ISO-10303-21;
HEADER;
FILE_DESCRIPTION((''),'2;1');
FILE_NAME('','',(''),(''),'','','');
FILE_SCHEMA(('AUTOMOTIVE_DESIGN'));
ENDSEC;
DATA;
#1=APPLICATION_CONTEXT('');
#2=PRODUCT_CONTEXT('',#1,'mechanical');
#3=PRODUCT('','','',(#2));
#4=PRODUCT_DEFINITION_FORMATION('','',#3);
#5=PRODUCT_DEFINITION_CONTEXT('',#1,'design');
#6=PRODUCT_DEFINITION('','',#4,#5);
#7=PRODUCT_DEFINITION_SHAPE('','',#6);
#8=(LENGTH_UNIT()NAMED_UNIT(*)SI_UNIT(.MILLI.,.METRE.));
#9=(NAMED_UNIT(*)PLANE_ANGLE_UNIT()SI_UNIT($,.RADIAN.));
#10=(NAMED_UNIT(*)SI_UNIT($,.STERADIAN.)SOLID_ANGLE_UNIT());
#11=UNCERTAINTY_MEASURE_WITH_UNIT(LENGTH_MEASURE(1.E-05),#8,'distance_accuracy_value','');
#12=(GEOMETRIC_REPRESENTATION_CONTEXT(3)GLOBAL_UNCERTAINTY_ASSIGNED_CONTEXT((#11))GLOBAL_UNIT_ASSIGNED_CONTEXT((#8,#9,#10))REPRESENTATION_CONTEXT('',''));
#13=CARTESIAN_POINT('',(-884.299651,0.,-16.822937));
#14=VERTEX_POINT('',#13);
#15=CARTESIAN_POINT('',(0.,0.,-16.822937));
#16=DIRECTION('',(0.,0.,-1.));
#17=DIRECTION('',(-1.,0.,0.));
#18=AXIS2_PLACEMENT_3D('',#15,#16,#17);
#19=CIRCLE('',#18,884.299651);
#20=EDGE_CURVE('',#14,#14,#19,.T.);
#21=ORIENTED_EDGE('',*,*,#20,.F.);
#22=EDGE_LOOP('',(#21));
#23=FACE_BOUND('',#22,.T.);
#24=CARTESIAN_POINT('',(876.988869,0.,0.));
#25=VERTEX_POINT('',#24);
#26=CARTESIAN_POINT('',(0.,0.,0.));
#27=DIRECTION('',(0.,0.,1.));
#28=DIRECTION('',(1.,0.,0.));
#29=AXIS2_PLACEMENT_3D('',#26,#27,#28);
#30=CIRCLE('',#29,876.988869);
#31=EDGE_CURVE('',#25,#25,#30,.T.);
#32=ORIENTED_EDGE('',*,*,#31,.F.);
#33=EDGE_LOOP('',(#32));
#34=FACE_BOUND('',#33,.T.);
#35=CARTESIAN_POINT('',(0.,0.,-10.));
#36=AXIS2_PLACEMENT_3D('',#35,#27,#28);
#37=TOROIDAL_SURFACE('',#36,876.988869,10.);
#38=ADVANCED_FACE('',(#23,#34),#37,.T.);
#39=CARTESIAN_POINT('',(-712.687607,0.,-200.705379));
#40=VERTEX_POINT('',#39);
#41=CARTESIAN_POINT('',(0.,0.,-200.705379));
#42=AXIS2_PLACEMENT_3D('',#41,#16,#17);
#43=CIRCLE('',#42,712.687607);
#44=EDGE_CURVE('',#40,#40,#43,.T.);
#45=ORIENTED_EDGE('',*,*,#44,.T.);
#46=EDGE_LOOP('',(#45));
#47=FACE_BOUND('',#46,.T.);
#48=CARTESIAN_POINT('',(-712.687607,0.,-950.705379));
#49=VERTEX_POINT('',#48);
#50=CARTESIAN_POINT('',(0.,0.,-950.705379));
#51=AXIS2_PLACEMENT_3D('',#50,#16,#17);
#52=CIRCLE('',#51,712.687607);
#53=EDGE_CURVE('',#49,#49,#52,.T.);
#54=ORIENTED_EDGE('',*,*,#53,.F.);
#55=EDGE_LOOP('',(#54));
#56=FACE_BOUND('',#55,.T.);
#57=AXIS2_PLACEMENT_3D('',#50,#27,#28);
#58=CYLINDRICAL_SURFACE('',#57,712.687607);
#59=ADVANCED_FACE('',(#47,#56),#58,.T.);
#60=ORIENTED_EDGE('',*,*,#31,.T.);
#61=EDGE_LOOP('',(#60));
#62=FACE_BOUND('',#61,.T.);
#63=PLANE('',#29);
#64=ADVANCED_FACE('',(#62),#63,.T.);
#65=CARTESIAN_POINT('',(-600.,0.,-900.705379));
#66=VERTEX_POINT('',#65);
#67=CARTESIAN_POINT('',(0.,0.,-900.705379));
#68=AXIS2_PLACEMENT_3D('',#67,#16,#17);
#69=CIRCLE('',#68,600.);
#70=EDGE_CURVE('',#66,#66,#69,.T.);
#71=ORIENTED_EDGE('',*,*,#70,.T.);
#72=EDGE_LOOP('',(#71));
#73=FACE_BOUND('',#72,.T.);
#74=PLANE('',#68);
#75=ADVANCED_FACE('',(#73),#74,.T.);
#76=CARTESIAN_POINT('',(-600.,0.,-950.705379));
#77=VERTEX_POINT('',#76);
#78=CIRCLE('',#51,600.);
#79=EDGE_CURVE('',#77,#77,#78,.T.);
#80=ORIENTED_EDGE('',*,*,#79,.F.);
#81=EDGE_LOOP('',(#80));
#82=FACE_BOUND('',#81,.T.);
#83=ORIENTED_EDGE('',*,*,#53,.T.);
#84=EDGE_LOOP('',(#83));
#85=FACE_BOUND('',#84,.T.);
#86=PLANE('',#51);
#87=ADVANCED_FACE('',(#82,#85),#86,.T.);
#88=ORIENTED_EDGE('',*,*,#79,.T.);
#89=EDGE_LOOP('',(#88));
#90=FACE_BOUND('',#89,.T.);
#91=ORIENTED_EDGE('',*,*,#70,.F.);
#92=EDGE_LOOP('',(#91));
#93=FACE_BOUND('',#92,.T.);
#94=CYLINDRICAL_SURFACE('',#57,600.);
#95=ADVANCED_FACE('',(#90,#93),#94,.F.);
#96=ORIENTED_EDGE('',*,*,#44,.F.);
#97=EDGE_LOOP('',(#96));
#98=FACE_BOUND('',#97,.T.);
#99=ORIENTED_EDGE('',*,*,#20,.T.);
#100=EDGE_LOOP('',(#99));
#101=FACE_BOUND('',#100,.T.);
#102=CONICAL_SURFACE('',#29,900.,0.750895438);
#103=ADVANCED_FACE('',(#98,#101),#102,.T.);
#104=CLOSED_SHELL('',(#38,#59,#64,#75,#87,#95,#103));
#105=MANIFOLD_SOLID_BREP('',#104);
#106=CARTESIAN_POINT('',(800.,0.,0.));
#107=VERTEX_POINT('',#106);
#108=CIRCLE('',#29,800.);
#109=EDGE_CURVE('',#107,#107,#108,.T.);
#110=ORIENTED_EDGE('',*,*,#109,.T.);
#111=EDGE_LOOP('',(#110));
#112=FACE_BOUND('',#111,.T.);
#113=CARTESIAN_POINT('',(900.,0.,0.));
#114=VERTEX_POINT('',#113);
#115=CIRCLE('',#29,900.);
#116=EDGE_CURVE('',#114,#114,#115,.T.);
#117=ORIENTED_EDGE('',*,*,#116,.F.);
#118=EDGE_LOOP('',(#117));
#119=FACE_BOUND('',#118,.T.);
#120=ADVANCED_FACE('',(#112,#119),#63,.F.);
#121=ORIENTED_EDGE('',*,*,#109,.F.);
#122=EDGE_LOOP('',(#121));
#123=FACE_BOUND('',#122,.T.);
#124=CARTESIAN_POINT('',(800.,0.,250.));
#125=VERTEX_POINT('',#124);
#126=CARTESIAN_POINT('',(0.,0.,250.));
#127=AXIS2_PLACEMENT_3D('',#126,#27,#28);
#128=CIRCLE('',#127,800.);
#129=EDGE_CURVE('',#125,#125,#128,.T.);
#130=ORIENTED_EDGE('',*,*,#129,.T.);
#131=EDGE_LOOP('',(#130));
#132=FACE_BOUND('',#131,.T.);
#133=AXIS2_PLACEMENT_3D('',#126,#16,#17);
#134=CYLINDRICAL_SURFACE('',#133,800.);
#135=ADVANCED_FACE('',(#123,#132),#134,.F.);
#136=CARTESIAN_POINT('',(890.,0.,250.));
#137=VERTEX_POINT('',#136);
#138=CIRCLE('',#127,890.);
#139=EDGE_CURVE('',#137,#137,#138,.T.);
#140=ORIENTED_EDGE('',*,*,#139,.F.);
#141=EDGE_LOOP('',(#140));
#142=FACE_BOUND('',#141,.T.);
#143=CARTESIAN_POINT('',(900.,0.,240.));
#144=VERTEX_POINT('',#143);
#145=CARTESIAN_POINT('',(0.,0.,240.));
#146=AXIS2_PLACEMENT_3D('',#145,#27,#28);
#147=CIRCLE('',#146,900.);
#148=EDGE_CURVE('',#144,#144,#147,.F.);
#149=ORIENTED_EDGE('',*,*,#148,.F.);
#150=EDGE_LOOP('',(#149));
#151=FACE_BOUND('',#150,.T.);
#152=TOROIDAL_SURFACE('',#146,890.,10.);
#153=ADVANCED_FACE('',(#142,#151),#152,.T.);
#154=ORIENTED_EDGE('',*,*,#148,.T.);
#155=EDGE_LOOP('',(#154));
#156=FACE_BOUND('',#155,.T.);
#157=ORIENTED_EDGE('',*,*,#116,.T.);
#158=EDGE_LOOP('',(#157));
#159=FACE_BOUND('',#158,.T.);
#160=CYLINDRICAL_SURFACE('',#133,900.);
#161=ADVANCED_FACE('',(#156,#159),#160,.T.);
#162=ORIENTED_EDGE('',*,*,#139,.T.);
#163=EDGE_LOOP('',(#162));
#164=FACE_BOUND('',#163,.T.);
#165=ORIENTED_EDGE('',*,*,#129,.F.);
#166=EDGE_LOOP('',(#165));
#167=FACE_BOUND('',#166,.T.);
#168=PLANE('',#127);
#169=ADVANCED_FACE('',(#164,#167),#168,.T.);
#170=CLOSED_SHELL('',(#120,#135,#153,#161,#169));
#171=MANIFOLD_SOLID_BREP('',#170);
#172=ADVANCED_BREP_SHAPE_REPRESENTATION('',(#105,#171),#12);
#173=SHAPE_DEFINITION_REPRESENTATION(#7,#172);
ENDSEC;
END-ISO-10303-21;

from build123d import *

# Parameters (mm, degrees)
SKETCH2_R           = 900
SKETCH2_R_2         = 800
BOSS_EXTRUDE1_DEPTH = 250
FILLET2_R           = 10
FILLET3_R           = 10
SKETCH4_R           = 712.687606949
SKETCH4_R_2         = 600
BOSS_EXTRUDE2_DEPTH = 750
SKETCH5_R           = 600
BOSS_EXTRUDE3_DEPTH = 700


with BuildPart() as part:
    # Sketch2 → Boss-Extrude1 (new body)
    with BuildSketch(Plane.XY):
        Circle(SKETCH2_R)
        Circle(SKETCH2_R_2, mode=Mode.SUBTRACT)
    extrude(amount=BOSS_EXTRUDE1_DEPTH)

    # Fillet2
    fillet2_edges = [part.edges().sort_by_distance(p)[0] for p in [
        (-900, 0, 250),
    ]]
    fillet(fillet2_edges, radius=FILLET2_R)


with BuildPart() as body_2:
    # Sketch3 → Revolve1 (revolve)
    with BuildSketch(Plane(origin=(0, 0, 0), x_dir=(0, 0, -1), z_dir=(1, 0, 0)), mode=Mode.PRIVATE) as revolve1_sk:
        Polygon((0, 0), (200.705378627, 0), (200.705378627, -712.687606949), (0, -900), align=None)
    revolve(revolve1_sk.sketch.rotate(Axis((0, 0, 0), (0, 0, -1)), 270), axis=Axis((0, 0, 0), (0, 0, -1)))

    # Fillet3
    fillet3_edges = [body_2.edges().sort_by_distance(p)[0] for p in [
        (-900, 0, 0),
    ]]
    fillet(fillet3_edges, radius=FILLET3_R)

    # Sketch4 → Boss-Extrude2 (add)
    with BuildSketch(Plane(origin=(0, 0, -200.705378627), x_dir=(-1, 0, 0), z_dir=(0, 0, -1))):
        Circle(SKETCH4_R)
        Circle(SKETCH4_R_2, mode=Mode.SUBTRACT)
    extrude(amount=BOSS_EXTRUDE2_DEPTH)

    # Sketch5 → Boss-Extrude3 (add)
    with BuildSketch(Plane(origin=(0, 0, -200.705378627), x_dir=(-1, 0, 0), z_dir=(0, 0, -1))):
        Circle(SKETCH5_R)
    extrude(amount=BOSS_EXTRUDE3_DEPTH)


solid = Compound([part.part, body_2.part])
